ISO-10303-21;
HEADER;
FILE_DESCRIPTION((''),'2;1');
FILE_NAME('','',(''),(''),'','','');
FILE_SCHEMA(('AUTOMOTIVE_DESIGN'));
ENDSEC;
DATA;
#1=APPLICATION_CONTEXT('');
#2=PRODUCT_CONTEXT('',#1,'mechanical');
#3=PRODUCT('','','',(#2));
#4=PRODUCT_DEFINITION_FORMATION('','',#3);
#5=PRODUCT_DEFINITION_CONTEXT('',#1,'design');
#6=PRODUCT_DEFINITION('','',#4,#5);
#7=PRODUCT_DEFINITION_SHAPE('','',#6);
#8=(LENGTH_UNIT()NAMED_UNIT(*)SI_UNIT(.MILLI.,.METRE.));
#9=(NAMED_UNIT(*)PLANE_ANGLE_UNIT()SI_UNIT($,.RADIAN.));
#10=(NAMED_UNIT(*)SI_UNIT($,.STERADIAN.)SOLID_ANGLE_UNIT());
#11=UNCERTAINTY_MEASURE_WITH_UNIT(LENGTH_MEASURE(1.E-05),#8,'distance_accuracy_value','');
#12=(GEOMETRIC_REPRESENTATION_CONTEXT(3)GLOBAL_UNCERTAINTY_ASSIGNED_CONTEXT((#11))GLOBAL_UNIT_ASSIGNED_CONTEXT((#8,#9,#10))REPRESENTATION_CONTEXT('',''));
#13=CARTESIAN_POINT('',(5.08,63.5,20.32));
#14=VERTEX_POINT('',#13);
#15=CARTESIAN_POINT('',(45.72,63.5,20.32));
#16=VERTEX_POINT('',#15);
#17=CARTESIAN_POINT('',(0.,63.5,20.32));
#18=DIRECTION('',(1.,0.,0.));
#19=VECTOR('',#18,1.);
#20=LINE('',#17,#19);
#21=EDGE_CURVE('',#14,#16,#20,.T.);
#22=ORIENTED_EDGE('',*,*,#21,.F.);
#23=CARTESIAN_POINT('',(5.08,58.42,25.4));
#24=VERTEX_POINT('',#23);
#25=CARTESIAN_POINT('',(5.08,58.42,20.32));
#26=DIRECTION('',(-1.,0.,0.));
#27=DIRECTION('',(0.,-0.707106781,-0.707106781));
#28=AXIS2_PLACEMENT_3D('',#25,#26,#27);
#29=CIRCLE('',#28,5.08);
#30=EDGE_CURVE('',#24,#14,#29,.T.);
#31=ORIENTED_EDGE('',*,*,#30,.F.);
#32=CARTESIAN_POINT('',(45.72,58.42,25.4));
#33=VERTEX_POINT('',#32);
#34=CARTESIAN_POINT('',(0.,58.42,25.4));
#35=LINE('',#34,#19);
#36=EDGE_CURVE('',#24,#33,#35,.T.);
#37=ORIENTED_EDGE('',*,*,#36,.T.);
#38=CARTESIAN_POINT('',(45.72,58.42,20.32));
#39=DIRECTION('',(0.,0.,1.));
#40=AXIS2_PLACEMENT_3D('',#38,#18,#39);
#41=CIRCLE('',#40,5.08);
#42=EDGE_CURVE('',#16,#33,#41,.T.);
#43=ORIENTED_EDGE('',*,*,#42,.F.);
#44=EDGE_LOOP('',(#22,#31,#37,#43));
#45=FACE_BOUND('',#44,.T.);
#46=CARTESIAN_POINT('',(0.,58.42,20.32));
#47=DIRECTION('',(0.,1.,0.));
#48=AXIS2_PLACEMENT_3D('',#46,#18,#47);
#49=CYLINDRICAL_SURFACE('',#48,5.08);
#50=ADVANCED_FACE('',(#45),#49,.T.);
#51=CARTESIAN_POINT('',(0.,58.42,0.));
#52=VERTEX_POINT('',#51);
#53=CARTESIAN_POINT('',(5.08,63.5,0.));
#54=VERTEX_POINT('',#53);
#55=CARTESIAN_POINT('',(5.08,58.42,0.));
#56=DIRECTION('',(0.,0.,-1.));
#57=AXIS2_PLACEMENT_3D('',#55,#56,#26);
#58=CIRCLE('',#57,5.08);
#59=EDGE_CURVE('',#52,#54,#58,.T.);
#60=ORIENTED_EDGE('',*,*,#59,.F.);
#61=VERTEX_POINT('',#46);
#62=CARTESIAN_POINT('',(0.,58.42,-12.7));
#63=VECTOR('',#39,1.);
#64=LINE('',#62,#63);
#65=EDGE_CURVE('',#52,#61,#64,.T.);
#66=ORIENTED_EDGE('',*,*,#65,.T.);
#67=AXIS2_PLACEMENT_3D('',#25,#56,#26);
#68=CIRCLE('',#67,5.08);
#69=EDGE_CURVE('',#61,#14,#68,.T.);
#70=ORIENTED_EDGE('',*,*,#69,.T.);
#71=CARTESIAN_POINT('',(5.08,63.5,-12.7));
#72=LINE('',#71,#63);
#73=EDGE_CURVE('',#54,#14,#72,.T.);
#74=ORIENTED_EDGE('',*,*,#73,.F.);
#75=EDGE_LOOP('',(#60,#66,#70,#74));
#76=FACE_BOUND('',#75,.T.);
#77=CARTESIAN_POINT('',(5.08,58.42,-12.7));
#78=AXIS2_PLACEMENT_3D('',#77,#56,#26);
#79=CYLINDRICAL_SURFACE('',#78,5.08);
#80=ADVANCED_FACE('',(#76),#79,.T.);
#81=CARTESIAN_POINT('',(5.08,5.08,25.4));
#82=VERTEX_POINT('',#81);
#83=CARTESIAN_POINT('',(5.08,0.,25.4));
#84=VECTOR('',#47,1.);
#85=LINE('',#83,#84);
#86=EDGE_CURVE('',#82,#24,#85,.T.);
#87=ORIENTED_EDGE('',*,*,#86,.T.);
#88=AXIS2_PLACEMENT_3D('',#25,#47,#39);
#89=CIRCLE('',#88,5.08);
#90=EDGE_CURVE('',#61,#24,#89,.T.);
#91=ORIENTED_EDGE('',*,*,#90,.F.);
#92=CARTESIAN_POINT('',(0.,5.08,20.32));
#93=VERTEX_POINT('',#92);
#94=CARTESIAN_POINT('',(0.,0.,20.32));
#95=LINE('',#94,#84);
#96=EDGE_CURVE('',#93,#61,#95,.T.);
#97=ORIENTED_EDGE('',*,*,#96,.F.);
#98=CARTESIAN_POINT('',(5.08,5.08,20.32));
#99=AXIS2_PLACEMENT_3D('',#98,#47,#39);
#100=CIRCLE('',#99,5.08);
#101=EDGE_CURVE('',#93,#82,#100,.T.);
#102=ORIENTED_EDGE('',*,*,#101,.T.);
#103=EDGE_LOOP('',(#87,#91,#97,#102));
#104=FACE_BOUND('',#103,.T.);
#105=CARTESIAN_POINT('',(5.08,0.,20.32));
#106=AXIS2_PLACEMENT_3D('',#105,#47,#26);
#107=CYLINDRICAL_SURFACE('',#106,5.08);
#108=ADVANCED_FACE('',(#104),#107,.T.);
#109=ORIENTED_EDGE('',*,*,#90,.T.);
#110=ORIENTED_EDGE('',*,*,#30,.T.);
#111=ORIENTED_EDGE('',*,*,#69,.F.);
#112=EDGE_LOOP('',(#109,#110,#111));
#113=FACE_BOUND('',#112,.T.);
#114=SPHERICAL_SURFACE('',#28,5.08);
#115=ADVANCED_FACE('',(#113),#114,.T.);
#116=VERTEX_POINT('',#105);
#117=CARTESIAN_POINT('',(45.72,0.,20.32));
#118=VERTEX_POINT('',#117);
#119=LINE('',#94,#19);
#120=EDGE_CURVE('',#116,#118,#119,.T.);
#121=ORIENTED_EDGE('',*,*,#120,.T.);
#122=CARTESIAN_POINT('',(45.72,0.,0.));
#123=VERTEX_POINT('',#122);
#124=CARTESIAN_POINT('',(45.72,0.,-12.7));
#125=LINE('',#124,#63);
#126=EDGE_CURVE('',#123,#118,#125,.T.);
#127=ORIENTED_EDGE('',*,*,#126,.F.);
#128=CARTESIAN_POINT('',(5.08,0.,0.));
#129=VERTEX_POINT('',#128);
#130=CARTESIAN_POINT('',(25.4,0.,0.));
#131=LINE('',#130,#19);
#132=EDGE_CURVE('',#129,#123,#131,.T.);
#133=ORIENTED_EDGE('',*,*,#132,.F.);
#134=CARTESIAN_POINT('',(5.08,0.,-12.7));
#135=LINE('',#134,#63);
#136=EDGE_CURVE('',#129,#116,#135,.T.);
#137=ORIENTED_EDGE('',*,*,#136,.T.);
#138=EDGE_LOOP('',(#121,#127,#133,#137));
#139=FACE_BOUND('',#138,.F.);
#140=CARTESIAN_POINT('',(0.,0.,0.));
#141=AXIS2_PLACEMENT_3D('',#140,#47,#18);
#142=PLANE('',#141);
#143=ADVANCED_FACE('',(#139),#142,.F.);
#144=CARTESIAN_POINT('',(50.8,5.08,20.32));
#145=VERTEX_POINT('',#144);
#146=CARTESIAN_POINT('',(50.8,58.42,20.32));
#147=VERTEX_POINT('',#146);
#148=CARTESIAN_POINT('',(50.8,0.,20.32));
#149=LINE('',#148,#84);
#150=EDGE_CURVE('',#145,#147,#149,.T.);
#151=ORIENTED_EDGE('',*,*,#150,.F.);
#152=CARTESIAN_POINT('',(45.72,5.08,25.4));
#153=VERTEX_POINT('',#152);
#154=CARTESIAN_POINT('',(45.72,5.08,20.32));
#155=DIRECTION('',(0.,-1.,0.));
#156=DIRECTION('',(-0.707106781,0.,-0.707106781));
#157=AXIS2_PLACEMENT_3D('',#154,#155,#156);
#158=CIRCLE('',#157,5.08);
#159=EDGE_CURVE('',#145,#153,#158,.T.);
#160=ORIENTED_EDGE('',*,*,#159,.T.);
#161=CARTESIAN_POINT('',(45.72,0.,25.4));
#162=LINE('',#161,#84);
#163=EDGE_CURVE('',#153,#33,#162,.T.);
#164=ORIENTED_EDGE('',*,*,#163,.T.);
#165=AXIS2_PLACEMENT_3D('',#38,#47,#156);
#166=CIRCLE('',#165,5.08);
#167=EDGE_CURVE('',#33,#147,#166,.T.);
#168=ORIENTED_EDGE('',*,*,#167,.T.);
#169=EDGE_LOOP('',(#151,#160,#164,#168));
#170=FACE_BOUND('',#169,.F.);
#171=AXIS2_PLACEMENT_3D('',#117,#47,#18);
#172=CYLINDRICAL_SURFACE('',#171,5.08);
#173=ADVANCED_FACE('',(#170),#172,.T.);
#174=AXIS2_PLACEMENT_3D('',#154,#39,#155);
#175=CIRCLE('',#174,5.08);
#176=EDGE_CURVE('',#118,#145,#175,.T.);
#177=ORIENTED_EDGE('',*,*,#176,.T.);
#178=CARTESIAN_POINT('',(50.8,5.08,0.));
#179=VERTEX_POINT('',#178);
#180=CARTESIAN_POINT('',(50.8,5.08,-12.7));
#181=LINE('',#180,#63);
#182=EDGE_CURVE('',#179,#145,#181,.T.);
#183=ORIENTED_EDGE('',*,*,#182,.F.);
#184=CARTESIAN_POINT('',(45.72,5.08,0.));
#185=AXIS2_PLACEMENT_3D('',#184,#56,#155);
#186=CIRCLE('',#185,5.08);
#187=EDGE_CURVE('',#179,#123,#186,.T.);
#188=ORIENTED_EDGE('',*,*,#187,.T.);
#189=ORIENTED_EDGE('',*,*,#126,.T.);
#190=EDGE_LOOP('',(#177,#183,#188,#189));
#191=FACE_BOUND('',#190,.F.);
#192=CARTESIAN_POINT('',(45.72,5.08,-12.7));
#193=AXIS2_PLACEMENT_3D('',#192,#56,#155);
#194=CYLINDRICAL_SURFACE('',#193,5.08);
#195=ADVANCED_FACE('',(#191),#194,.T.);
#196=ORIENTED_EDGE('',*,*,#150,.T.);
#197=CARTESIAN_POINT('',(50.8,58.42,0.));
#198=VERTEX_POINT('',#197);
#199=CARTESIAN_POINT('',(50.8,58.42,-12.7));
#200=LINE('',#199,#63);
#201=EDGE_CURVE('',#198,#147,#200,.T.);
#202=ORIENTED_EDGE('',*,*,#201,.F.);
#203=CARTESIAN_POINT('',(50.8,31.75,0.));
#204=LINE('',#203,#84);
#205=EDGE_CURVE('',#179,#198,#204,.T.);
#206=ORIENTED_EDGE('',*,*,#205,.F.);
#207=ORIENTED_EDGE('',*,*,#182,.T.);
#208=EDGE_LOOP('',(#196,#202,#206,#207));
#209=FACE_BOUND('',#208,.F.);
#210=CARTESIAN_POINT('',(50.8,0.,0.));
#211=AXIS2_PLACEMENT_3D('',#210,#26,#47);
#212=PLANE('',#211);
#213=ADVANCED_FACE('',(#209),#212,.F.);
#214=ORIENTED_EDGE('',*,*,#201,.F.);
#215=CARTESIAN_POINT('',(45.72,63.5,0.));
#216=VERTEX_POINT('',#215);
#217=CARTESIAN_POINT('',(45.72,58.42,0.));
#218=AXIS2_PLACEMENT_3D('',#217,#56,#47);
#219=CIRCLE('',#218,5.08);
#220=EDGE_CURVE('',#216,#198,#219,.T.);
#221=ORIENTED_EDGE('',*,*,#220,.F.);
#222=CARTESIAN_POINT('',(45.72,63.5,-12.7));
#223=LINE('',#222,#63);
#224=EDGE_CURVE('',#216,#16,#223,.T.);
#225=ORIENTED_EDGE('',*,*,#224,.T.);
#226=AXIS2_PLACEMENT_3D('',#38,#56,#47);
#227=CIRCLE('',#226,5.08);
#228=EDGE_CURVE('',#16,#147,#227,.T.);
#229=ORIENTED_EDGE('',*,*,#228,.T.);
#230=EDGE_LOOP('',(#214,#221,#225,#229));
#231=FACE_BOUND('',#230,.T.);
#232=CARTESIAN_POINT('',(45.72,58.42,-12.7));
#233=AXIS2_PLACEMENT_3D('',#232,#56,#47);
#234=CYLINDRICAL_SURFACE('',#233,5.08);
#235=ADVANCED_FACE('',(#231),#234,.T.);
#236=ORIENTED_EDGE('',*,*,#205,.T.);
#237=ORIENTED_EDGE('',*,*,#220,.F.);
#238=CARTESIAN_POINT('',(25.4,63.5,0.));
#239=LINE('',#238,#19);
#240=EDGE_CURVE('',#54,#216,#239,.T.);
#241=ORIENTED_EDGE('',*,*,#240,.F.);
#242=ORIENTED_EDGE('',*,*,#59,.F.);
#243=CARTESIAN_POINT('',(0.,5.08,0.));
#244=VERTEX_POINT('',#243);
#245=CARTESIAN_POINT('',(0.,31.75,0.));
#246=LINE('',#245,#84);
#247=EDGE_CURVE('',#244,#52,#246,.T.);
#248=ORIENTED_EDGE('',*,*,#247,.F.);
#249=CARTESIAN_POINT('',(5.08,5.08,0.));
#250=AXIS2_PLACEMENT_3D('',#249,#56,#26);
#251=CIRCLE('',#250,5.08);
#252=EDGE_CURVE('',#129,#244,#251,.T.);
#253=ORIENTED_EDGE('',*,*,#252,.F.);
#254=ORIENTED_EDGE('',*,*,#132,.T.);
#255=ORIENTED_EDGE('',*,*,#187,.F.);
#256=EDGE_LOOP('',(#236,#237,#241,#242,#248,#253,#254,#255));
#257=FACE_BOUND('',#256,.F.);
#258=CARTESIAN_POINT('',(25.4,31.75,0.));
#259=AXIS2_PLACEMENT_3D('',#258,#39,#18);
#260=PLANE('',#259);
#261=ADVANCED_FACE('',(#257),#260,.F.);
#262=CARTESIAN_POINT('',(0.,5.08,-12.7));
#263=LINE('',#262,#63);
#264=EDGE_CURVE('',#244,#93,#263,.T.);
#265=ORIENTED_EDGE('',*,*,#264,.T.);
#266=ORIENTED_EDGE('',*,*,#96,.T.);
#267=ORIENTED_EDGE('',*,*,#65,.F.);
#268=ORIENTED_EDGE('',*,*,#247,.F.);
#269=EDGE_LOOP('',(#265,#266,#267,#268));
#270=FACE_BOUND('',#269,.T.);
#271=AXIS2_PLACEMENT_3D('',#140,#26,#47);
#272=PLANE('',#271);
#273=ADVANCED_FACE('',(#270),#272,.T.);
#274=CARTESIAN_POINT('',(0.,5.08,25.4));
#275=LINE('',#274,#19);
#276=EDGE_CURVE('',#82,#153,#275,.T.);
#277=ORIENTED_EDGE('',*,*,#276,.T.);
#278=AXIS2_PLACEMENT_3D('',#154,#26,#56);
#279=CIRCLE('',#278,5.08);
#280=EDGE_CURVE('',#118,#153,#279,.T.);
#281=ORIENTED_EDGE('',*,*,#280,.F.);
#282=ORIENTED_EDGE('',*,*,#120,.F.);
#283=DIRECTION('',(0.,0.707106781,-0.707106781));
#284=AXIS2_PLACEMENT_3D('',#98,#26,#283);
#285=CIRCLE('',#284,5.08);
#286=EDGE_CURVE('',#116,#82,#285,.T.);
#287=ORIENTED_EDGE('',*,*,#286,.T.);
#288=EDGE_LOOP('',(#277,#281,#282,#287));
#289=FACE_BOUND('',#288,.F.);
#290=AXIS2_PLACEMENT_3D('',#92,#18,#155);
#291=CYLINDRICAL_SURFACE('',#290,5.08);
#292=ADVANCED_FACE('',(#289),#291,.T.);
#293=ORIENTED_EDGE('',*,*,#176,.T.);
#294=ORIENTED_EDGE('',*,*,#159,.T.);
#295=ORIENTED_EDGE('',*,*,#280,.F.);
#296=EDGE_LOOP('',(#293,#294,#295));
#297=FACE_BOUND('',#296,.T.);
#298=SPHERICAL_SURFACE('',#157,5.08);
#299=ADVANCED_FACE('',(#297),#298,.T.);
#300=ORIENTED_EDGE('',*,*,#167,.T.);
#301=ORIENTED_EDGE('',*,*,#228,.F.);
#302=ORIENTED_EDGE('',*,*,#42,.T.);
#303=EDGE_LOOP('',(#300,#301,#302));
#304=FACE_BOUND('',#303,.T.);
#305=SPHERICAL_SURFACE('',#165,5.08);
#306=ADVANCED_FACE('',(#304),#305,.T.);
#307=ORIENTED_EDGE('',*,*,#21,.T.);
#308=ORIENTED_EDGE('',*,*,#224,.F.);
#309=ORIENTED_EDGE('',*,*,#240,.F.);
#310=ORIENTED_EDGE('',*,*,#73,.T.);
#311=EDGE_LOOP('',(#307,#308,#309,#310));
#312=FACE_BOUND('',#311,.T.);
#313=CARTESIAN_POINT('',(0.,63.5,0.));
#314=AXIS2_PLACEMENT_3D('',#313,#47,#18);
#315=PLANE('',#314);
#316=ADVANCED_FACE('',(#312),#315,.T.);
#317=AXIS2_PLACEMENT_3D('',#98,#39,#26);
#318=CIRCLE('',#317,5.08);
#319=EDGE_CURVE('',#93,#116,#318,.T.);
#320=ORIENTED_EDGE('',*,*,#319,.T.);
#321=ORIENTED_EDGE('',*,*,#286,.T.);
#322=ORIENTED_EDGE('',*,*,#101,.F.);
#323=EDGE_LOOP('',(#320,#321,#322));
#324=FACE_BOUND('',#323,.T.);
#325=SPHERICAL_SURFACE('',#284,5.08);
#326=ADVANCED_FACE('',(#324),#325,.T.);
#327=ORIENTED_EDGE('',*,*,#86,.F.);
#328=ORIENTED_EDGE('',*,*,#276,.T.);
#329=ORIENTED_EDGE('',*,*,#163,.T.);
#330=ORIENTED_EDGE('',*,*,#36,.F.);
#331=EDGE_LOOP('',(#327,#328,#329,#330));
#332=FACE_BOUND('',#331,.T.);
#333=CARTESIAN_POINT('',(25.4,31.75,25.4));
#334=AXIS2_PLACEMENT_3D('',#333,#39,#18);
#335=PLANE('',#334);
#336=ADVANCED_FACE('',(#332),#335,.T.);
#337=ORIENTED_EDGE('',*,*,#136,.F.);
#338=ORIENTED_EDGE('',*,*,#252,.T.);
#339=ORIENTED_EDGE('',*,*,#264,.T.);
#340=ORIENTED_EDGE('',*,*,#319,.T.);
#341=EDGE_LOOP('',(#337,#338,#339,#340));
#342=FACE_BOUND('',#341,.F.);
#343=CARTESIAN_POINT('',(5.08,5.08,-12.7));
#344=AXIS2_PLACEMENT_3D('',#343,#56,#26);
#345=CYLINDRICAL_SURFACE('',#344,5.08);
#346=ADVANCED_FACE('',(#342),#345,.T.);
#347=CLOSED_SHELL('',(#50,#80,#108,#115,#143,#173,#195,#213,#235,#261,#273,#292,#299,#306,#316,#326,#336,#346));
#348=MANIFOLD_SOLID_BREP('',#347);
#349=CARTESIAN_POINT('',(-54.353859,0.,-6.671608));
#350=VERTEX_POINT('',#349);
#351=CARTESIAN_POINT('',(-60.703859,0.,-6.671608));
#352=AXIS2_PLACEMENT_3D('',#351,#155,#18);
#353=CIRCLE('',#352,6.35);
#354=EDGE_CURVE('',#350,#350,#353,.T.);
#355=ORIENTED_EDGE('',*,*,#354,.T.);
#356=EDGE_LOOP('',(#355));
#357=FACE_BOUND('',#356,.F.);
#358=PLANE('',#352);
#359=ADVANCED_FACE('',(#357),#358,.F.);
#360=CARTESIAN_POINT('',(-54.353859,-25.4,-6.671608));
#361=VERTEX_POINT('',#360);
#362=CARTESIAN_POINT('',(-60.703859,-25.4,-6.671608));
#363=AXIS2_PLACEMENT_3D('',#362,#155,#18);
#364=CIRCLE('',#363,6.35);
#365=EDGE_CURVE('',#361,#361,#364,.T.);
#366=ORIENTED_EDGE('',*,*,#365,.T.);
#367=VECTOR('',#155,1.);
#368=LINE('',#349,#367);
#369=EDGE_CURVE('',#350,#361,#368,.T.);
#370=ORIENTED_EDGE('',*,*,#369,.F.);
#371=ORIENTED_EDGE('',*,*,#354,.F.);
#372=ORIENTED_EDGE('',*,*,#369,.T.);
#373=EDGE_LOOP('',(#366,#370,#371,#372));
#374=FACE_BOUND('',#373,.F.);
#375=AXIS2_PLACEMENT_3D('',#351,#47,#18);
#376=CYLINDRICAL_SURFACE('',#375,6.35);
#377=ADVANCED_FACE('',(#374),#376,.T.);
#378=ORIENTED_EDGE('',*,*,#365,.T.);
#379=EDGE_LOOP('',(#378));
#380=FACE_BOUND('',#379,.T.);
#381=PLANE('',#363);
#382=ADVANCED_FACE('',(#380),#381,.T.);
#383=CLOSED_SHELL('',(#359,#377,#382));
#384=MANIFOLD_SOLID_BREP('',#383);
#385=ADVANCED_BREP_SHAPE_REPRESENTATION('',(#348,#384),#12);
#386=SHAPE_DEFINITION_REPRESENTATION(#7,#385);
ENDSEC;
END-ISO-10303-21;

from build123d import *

# Parameters (mm, degrees)
F0_W         = 50.8
F0_H         = 63.5
F1_DEPTH     = 25.4
F2_R         = 6.35
F3_DEPTH     = 25.4
F4_R         = 5.08
F5_T1_DEPTH  = 33.02
F5_S5_W      = 5.08
F5_S5_H      = 5.08
F5_T6_DEPTH  = 5.08
F5_S11_W     = 5.08
F5_S11_H     = 5.08
F5_T12_DEPTH = 5.08
F5_S17_W     = 5.08
F5_S17_H     = 5.08
F5_T18_DEPTH = 5.08
F5_S23_W     = 5.08
F5_S23_H     = 5.08
F5_T24_DEPTH = 5.08


# Not quite as in the source:
# - a fillet or chamfer that OpenCascade refuses, or shapes differently, is made with other operations: its cross-section is extruded or revolved along the edge and cut away or added


with BuildPart() as f1:
    # F0 (on Top) → F1 (new body)
    with BuildSketch(Plane.XY):
        with Locations((25.4, 31.75)):
            Rectangle(F0_W, F0_H)
    extrude(amount=F1_DEPTH)

    # F4
    f4_edges = [f1.edges().sort_by_distance(p)[0] for p in [
        (25.4, 0, 25.4),
        (50.8, 31.75, 25.4),
        (25.4, 63.5, 25.4),
        (0, 31.75, 25.4),
    ]]
    fillet(f4_edges, radius=F4_R)

    # F5: fillet of radius 5.08 on 4 edges, made by hand

    # F5_s2 → F5_t1 (cut)
    with BuildSketch(Plane.XY.offset(-12.7)):
        with BuildLine():
            ThreePointArc((0, 5.08), (1.4878975516, 1.4878975516), (5.08, 0))
            Line((5.08, 0), (0, 0))
            Line((0, 0), (0, 5.08))
        make_face()
        with BuildLine():
            ThreePointArc((45.72, 0), (49.3121024484, 1.4878975516), (50.8, 5.08))
            Line((50.8, 5.08), (50.8, 0))
            Line((50.8, 0), (45.72, 0))
        make_face()
        with BuildLine():
            ThreePointArc((45.72, 63.5), (49.3121024484, 62.0121024484), (50.8, 58.42))
            Line((50.8, 58.42), (50.8, 63.5))
            Line((50.8, 63.5), (45.72, 63.5))
        make_face()
        with BuildLine():
            ThreePointArc((0, 58.42), (1.4878975516, 62.0121024484), (5.08, 63.5))
            Line((5.08, 63.5), (0, 63.5))
            Line((0, 63.5), (0, 58.42))
        make_face()
    extrude(amount=F5_T1_DEPTH, mode=Mode.SUBTRACT)


with BuildPart() as f3:
    # F2 (on Front) → F3 (new body)
    with BuildSketch(Plane.XZ):
        with Locations((-60.7038587332, -6.6716084257)):
            Circle(F2_R)
    extrude(amount=F3_DEPTH)


with BuildPart() as f5_tool4:
    # F5_s5 → F5_t6 (new body)
    with BuildSketch(Plane.YZ.offset(5.08)):
        with Locations((60.96, 22.86)):
            Rectangle(F5_S5_W, F5_S5_H)
    extrude(amount=-F5_T6_DEPTH)

    # F5_s7 → F5_t8 (revolve, cut)
    with BuildSketch(Plane(origin=(5.08, 58.42, 20.32), x_dir=(0, -0.7071067812, -0.7071067812), z_dir=(0, 0.7071067812, -0.7071067812))):
        with BuildLine():
            ThreePointArc((0, -5.08), (5.08, 0), (0, 5.08))
            Line((0, 5.08), (0, -5.08))
        make_face()
    revolve(axis=Axis((5.08, 58.42, 20.32), (-1, 0, 0)), mode=Mode.SUBTRACT)


with BuildPart() as f1_1:
    add(f1.part)

    # F5_t3: cut F5_tool4
    add(f5_tool4.part, mode=Mode.SUBTRACT)


with BuildPart() as f5_tool10:
    # F5_s11 → F5_t12 (new body)
    with BuildSketch(Plane.XZ.offset(-58.42)):
        with Locations((48.26, 22.86)):
            Rectangle(F5_S11_W, F5_S11_H)
    extrude(amount=-F5_T12_DEPTH)

    # F5_s13 → F5_t14 (revolve, cut)
    with BuildSketch(Plane(origin=(45.72, 58.42, 20.32), x_dir=(-0.7071067812, 0, -0.7071067812), z_dir=(0.7071067812, 0, -0.7071067812))):
        with BuildLine():
            ThreePointArc((0, -5.08), (5.08, 0), (0, 5.08))
            Line((0, 5.08), (0, -5.08))
        make_face()
    revolve(axis=Axis((45.72, 58.42, 20.32), (0, 1, 0)), mode=Mode.SUBTRACT)


with BuildPart() as f1_2:
    add(f1_1.part)

    # F5_t9: cut F5_tool10
    add(f5_tool10.part, mode=Mode.SUBTRACT)


with BuildPart() as f5_tool16:
    # F5_s17 → F5_t18 (new body)
    with BuildSketch(Plane.XZ.offset(-5.08)):
        with Locations((48.26, 22.86)):
            Rectangle(F5_S17_W, F5_S17_H)
    extrude(amount=F5_T18_DEPTH)

    # F5_s19 → F5_t20 (revolve, cut)
    with BuildSketch(Plane(origin=(45.72, 5.08, 20.32), x_dir=(-0.7071067812, 0, -0.7071067812), z_dir=(-0.7071067812, 0, 0.7071067812))):
        with BuildLine():
            ThreePointArc((0, -5.08), (5.08, 0), (0, 5.08))
            Line((0, 5.08), (0, -5.08))
        make_face()
    revolve(axis=Axis((45.72, 5.08, 20.32), (0, -1, 0)), mode=Mode.SUBTRACT)


with BuildPart() as f1_3:
    add(f1_2.part)

    # F5_t15: cut F5_tool16
    add(f5_tool16.part, mode=Mode.SUBTRACT)


with BuildPart() as f5_tool22:
    # F5_s23 → F5_t24 (new body)
    with BuildSketch(Plane.YZ.offset(5.08)):
        with Locations((2.54, 22.86)):
            Rectangle(F5_S23_W, F5_S23_H)
    extrude(amount=-F5_T24_DEPTH)

    # F5_s25 → F5_t26 (revolve, cut)
    with BuildSketch(Plane(origin=(5.08, 5.08, 20.32), x_dir=(0, 0.7071067812, -0.7071067812), z_dir=(0, 0.7071067812, 0.7071067812))):
        with BuildLine():
            ThreePointArc((0, -5.08), (5.08, 0), (0, 5.08))
            Line((0, 5.08), (0, -5.08))
        make_face()
    revolve(axis=Axis((5.08, 5.08, 20.32), (-1, 0, 0)), mode=Mode.SUBTRACT)


with BuildPart() as f1_4:
    add(f1_3.part)

    # F5_t21: cut F5_tool22
    add(f5_tool22.part, mode=Mode.SUBTRACT)


solid = Compound([f3.part, f1_4.part])
